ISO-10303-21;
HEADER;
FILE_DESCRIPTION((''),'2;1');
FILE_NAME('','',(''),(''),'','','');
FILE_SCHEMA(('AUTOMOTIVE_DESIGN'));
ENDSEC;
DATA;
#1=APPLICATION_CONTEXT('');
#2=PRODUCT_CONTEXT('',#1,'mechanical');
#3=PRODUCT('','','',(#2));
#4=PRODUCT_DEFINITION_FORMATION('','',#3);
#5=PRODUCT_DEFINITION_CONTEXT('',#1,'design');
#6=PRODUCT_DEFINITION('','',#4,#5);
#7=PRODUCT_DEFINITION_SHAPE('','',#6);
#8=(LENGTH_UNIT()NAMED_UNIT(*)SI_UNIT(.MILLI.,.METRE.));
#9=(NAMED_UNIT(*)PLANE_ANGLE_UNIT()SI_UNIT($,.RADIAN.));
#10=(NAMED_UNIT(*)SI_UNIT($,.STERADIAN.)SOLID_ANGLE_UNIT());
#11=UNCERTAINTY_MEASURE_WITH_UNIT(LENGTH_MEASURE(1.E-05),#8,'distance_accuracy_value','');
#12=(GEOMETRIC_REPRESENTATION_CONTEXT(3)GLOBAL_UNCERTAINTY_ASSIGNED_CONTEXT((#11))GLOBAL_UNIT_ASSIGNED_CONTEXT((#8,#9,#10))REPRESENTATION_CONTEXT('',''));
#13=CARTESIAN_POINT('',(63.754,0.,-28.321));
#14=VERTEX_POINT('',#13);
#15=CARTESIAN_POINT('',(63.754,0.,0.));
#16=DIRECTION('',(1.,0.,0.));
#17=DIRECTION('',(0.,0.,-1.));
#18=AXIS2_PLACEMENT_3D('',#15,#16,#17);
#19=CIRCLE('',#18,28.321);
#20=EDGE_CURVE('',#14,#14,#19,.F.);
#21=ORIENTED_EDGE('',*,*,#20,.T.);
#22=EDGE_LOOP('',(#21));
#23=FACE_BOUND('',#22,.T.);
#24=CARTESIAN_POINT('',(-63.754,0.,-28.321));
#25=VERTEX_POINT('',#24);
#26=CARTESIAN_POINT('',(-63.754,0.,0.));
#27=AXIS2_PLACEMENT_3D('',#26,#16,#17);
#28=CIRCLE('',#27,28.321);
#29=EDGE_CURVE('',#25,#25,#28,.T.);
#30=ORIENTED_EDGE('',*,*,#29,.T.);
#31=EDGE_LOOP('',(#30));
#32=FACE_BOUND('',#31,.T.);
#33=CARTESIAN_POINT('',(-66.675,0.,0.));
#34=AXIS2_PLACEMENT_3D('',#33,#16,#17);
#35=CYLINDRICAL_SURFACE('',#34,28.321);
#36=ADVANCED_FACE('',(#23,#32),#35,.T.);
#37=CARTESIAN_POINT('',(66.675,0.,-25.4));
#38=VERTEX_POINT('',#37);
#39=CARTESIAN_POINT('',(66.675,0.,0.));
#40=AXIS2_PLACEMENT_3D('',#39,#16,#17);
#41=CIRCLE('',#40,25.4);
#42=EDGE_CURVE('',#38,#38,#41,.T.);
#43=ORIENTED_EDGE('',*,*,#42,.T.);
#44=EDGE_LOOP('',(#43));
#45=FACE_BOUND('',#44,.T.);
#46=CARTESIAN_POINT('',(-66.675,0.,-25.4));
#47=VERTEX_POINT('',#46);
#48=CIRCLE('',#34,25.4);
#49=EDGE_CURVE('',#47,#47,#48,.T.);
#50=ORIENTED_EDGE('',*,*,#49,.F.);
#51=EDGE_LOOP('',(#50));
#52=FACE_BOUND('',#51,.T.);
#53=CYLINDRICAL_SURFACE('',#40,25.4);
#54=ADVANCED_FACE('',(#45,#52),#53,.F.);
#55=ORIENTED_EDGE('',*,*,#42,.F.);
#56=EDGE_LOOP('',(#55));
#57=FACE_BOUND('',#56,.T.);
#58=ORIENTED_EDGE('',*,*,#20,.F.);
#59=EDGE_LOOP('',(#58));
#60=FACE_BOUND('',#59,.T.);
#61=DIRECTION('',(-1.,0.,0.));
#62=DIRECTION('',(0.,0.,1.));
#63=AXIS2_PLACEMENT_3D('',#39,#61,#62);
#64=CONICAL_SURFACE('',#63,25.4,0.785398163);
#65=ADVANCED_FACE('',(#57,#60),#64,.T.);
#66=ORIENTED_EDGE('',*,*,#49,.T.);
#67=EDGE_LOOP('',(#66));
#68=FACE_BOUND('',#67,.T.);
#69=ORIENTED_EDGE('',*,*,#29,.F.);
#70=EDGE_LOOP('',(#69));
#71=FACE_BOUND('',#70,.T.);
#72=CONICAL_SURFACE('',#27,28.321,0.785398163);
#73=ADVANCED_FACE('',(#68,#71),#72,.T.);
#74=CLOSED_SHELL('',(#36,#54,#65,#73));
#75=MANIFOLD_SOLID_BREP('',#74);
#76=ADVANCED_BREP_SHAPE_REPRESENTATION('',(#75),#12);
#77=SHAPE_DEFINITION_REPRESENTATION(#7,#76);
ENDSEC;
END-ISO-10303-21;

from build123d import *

# Parameters (mm, degrees)
BOSS_EXTRUDE1_DEPTH      = 66.675
BOSS_EXTRUDE1_DEPTH_BACK = 66.675
SKETCH1_R                = 28.321
F_97_2_DIAMETER_HOLE1_D  = 50.8
CHAMFER1_SIZE            = 2.921


with BuildPart() as part:
    # Sketch1 → Boss-Extrude1 (new, two sides: drawn at the far end of the back side and taken through both)
    with BuildSketch(Plane(origin=(0, 0, 0), x_dir=(0, 0, -1), z_dir=(1, 0, 0)).offset(-BOSS_EXTRUDE1_DEPTH_BACK)):
        Circle(SKETCH1_R)
    extrude(amount=BOSS_EXTRUDE1_DEPTH + BOSS_EXTRUDE1_DEPTH_BACK)

    # #97 (2) Diameter Hole1 (through all)
    with Locations(Plane(origin=(66.675, 0, 0), x_dir=(0, 0, -1), z_dir=(1, 0, 0))):
        with Locations((0, 0)):
            Hole(F_97_2_DIAMETER_HOLE1_D / 2)

    # Chamfer1
    chamfer1_edges = [part.edges().sort_by_distance(p)[0] for p in [
        (66.675, 0, 28.321),
        (-66.675, 0, 28.321),
    ]]
    chamfer(chamfer1_edges, length=CHAMFER1_SIZE - 0.0001)  # a hair under: the kernel refuses the full size


solid = part.part
